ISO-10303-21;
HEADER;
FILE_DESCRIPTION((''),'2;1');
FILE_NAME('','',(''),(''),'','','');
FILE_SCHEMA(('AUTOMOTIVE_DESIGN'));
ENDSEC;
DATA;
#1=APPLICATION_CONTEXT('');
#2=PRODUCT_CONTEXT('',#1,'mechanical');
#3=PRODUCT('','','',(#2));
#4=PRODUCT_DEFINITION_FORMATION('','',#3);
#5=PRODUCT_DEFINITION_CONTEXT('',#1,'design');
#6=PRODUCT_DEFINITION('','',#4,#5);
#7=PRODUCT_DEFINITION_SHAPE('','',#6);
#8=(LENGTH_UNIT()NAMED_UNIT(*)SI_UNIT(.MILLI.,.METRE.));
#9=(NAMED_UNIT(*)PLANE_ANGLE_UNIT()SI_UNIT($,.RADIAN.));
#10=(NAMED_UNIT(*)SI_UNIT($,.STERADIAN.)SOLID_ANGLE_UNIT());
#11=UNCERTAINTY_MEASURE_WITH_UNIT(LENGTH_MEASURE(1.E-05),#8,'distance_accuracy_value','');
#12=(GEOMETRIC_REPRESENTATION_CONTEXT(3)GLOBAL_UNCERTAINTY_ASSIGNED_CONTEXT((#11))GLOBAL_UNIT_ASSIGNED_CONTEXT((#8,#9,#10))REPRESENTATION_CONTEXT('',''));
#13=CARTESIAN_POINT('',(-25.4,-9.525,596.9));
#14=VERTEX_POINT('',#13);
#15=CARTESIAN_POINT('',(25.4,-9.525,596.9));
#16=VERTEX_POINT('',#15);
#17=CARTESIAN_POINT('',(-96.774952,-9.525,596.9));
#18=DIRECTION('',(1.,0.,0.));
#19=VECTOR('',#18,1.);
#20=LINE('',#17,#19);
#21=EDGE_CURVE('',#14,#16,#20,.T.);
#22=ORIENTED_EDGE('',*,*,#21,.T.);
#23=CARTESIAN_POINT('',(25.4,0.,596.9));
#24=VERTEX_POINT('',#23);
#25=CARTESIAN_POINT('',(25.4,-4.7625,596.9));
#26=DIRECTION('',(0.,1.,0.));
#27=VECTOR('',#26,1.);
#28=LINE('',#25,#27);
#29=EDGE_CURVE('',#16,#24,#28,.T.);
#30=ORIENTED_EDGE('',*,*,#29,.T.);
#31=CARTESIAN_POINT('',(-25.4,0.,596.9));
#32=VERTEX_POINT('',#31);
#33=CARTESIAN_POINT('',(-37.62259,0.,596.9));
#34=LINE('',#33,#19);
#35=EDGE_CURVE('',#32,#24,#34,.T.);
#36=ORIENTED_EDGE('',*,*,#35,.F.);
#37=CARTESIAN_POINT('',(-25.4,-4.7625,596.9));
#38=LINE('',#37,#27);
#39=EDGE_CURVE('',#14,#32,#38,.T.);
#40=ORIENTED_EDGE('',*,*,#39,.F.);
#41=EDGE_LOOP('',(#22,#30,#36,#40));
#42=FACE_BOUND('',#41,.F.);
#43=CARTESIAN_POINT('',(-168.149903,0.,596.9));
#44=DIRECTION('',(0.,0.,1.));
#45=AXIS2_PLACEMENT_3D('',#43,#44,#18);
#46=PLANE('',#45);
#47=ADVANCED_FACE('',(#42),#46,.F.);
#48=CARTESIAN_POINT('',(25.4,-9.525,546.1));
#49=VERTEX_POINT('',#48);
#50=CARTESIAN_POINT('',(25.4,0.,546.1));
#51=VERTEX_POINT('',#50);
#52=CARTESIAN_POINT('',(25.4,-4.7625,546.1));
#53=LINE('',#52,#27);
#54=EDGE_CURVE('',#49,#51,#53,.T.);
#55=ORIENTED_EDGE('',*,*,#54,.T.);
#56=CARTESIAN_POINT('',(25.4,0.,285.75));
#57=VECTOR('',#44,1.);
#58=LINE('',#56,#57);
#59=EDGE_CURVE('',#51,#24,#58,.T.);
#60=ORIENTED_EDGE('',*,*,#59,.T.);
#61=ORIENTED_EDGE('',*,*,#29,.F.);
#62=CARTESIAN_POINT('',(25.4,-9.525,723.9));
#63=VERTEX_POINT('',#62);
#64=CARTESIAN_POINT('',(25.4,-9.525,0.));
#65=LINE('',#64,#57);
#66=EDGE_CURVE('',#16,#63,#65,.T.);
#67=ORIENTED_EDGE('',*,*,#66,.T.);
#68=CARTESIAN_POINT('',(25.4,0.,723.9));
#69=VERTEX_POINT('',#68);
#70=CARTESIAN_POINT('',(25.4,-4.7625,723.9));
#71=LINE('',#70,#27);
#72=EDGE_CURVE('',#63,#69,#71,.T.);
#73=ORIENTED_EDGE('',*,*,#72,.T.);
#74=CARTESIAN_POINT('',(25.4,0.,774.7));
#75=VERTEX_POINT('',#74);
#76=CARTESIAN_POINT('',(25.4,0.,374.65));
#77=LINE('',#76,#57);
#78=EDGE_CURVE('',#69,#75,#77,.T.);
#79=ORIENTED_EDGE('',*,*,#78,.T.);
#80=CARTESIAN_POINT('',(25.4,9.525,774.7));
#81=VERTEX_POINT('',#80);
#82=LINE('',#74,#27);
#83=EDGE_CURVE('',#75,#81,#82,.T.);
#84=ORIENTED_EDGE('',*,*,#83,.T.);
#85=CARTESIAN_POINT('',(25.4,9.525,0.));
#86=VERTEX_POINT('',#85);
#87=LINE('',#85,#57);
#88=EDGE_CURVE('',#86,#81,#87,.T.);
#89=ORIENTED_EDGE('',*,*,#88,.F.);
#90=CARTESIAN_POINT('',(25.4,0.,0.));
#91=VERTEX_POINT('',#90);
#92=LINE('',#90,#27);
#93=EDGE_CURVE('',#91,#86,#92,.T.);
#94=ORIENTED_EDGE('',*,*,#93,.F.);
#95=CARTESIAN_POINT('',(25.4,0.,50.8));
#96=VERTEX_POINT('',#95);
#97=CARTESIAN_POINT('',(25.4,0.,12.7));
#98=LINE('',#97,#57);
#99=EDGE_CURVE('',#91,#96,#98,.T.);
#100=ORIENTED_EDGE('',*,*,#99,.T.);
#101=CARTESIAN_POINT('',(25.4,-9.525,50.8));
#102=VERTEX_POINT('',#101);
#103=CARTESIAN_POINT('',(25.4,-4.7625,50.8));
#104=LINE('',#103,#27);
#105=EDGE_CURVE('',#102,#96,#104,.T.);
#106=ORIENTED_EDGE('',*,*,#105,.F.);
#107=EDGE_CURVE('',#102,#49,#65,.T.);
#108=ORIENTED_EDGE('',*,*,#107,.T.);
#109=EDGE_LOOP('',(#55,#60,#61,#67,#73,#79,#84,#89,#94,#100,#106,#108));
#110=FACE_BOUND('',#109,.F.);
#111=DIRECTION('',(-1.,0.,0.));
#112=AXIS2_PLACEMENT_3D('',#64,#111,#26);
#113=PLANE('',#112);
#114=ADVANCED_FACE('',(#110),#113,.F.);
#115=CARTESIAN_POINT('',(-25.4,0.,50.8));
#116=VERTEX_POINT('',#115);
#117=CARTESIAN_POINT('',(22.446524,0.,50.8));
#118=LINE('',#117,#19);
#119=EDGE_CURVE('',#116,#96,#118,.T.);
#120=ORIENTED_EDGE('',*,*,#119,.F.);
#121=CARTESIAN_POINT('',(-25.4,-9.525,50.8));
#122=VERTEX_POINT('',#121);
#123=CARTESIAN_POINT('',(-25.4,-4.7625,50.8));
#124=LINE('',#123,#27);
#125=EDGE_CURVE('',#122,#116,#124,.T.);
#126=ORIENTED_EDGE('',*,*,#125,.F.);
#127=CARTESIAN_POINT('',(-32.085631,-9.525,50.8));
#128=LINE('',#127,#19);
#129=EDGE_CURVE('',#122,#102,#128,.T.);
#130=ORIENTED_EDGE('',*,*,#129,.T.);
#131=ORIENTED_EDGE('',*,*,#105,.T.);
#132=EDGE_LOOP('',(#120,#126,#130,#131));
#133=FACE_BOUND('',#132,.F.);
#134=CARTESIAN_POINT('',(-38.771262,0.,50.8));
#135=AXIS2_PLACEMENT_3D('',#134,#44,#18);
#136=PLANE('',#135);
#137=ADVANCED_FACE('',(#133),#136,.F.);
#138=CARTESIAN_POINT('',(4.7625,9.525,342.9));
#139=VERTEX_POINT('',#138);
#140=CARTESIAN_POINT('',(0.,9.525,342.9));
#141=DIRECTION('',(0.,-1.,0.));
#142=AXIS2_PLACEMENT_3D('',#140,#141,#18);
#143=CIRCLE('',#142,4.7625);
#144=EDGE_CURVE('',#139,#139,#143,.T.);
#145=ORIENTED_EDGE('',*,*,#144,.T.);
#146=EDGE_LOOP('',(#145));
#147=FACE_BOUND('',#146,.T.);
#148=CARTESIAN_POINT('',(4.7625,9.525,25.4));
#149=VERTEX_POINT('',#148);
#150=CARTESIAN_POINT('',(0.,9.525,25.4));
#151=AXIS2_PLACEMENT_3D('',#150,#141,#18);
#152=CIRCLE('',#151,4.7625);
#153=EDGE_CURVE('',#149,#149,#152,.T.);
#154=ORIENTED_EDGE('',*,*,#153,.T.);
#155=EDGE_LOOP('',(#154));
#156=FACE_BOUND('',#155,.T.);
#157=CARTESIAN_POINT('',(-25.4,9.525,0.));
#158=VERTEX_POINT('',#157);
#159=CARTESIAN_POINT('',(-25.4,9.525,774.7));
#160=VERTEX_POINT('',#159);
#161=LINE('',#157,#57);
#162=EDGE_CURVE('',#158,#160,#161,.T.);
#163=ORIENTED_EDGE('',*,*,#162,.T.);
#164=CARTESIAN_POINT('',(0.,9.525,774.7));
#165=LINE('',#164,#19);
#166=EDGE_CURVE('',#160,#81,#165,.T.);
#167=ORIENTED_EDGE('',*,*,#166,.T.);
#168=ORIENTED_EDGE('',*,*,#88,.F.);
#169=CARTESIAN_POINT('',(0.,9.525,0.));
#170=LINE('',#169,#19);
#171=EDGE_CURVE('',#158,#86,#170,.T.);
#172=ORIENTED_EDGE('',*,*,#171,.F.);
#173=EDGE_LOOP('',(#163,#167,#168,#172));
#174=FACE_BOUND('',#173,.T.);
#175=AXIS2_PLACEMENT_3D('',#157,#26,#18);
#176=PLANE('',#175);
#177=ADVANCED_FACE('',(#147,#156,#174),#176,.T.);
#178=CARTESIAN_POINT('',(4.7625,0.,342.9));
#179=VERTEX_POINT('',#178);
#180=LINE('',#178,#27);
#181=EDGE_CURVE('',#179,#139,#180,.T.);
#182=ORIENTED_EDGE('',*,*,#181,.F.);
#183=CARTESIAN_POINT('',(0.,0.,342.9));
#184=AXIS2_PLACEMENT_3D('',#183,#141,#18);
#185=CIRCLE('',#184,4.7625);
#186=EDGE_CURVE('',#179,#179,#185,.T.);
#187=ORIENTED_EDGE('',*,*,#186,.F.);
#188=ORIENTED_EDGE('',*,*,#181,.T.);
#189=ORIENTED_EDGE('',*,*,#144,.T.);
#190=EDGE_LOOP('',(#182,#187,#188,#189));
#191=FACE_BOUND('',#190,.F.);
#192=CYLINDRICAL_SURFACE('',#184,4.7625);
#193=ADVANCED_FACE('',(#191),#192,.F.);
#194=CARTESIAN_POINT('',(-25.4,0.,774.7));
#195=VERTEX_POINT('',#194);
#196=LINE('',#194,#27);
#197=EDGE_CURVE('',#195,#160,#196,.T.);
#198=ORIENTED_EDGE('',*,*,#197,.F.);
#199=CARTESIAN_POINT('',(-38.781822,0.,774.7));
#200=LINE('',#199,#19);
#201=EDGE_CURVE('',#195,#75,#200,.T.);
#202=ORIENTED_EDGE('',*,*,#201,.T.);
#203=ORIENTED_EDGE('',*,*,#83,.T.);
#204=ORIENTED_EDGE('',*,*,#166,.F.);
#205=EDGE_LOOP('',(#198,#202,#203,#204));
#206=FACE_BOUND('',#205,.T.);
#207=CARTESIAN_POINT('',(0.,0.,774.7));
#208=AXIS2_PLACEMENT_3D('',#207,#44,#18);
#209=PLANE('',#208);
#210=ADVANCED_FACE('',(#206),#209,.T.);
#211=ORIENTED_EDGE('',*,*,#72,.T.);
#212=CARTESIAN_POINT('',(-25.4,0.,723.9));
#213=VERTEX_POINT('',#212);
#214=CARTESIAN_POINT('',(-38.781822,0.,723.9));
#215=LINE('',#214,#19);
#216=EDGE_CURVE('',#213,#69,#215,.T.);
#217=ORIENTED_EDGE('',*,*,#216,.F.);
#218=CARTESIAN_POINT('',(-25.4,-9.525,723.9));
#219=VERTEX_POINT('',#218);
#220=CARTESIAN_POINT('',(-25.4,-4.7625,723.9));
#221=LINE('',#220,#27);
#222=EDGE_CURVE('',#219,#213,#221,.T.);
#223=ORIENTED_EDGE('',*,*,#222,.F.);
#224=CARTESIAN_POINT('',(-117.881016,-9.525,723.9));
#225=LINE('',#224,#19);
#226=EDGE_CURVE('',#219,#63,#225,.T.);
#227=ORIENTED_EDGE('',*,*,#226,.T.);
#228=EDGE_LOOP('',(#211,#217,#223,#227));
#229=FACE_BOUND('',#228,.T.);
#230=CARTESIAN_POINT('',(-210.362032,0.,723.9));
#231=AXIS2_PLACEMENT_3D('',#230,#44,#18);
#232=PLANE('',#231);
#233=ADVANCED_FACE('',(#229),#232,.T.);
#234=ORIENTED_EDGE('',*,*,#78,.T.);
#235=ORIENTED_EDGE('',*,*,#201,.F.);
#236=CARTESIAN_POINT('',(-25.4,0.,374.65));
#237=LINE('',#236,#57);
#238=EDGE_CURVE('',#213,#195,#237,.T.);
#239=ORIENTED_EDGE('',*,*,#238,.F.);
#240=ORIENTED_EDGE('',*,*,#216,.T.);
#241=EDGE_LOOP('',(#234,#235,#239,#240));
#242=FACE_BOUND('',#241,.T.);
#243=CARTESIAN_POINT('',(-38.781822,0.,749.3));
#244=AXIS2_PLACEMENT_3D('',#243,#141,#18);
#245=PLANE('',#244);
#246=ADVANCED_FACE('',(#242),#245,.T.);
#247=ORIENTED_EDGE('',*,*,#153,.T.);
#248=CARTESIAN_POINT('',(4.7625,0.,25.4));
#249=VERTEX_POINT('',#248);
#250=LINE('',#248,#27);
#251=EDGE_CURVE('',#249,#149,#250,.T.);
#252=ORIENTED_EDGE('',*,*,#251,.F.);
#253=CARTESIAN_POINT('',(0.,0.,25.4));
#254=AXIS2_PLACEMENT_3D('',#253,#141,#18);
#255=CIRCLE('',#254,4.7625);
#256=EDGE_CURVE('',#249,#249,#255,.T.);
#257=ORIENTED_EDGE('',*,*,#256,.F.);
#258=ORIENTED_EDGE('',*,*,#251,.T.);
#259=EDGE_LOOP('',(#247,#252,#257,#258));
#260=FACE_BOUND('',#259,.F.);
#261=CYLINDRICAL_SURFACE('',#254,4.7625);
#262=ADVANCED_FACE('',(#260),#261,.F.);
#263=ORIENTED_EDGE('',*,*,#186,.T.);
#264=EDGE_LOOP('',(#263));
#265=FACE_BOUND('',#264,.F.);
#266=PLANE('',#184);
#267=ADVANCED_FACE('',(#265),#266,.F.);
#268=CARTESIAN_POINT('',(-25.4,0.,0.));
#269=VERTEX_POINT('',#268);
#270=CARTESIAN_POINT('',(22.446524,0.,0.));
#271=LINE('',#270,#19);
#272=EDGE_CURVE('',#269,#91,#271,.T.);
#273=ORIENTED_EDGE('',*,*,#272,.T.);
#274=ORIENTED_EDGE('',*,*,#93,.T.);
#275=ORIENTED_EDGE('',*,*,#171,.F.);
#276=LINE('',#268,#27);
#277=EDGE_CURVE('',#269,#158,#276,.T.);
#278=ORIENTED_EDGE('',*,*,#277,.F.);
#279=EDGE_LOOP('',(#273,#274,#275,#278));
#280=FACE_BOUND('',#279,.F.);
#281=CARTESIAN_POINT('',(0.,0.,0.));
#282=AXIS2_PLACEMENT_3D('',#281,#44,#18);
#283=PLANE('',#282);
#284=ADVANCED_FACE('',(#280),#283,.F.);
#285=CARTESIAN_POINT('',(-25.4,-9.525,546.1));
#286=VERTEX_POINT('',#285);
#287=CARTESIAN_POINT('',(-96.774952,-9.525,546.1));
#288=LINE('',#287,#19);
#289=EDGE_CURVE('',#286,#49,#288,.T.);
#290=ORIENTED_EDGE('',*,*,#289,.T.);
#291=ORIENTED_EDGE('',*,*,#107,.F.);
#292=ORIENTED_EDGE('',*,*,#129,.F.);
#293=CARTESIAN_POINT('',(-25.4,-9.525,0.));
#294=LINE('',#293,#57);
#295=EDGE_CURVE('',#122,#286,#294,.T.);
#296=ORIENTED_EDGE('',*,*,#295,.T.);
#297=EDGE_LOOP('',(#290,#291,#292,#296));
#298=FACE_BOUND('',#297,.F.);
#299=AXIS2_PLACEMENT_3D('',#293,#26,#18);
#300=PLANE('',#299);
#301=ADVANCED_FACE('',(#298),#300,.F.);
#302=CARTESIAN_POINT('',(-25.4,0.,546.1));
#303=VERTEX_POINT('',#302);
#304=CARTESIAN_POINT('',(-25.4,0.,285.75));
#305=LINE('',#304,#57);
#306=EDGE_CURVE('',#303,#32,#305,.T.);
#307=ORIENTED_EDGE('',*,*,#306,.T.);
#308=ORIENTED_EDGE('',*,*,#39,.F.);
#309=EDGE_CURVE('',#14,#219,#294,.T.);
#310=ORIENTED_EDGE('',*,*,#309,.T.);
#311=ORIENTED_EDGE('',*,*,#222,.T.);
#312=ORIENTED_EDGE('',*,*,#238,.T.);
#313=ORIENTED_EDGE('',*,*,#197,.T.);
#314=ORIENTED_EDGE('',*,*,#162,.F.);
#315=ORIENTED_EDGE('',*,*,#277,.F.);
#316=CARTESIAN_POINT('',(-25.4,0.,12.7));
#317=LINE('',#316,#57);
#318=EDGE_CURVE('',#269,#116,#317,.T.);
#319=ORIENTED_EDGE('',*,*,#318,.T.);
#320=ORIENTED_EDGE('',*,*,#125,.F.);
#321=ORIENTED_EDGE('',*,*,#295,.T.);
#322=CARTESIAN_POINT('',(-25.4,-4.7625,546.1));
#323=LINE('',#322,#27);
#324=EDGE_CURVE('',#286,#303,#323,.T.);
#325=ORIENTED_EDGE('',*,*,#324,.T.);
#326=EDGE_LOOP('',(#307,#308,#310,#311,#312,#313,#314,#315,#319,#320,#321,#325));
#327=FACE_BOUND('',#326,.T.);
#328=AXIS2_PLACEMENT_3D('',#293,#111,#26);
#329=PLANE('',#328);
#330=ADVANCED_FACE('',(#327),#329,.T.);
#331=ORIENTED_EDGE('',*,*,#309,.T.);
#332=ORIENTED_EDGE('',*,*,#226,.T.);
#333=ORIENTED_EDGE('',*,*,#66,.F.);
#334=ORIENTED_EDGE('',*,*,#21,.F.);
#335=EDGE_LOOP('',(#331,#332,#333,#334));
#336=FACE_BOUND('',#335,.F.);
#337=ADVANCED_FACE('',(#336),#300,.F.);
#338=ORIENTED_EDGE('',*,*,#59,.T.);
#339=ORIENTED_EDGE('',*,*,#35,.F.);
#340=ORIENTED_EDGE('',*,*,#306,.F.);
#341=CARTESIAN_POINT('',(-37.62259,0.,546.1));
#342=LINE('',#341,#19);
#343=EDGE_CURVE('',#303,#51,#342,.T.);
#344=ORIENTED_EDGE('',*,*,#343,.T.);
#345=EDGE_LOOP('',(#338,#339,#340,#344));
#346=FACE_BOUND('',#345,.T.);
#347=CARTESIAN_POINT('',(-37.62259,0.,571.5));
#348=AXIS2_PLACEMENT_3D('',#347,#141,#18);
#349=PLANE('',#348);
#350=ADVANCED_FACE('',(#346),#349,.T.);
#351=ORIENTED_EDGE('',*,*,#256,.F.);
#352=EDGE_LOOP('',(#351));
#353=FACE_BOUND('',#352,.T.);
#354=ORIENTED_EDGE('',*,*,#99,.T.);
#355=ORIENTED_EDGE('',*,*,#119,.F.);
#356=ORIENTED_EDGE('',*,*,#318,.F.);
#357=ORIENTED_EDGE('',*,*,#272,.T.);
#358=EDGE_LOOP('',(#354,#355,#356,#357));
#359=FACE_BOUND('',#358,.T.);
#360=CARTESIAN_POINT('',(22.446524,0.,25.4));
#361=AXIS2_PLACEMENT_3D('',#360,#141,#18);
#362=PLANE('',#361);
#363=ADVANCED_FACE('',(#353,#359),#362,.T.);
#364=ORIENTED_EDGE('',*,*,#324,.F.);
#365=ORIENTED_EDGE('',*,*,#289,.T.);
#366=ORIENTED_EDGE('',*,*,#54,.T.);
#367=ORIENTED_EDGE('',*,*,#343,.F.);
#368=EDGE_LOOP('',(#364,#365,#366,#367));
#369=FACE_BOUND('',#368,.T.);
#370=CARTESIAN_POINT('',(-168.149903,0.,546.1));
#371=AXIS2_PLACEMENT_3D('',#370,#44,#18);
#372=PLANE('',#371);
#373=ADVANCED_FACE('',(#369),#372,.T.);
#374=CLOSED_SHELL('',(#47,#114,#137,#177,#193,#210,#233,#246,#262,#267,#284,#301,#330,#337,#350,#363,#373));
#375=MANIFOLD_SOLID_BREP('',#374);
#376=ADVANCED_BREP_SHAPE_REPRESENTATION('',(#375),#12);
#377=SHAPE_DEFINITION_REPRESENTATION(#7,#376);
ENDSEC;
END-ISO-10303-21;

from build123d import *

# Parameters (mm, degrees)
F0_W     = 50.8
F0_H     = 19.05
F1_DEPTH = 774.7
F2_W     = 122.43557321
F2_H     = 50.8
F2_W_2   = 343.1604206562
F2_W_3   = 261.0546275973
F3_DEPTH = 25.4
F4_R     = 4.7625
F5_DEPTH = 25.4


# Not quite as in the source:
# - a feature names something its author has since deleted; it is built from what else it names


with BuildPart() as f1:
    # F0 (on Top) → F1 (new body)
    with BuildSketch(Plane.XY):
        Rectangle(F0_W, F0_H)
    extrude(amount=F1_DEPTH)

    # F2 (on Front) → F3 (cut)
    with BuildSketch(Plane.XZ):
        with Locations((22.4465244144, 25.4)):
            Rectangle(F2_W, F2_H)
        with Locations((-38.7818217278, 749.3)):
            Rectangle(F2_W_2, F2_H)
        with Locations((-37.622589618, 571.5)):
            Rectangle(F2_W_3, F2_H)
    extrude(amount=F3_DEPTH, mode=Mode.SUBTRACT)

    # F4 (on Front) → F5 (cut)
    with BuildSketch(Plane.XZ):
        with Locations((0, 25.4)):
            Circle(F4_R)
        with Locations((0, 342.9)):
            Circle(F4_R)
    extrude(amount=-F5_DEPTH, mode=Mode.SUBTRACT)


solid = f1.part
